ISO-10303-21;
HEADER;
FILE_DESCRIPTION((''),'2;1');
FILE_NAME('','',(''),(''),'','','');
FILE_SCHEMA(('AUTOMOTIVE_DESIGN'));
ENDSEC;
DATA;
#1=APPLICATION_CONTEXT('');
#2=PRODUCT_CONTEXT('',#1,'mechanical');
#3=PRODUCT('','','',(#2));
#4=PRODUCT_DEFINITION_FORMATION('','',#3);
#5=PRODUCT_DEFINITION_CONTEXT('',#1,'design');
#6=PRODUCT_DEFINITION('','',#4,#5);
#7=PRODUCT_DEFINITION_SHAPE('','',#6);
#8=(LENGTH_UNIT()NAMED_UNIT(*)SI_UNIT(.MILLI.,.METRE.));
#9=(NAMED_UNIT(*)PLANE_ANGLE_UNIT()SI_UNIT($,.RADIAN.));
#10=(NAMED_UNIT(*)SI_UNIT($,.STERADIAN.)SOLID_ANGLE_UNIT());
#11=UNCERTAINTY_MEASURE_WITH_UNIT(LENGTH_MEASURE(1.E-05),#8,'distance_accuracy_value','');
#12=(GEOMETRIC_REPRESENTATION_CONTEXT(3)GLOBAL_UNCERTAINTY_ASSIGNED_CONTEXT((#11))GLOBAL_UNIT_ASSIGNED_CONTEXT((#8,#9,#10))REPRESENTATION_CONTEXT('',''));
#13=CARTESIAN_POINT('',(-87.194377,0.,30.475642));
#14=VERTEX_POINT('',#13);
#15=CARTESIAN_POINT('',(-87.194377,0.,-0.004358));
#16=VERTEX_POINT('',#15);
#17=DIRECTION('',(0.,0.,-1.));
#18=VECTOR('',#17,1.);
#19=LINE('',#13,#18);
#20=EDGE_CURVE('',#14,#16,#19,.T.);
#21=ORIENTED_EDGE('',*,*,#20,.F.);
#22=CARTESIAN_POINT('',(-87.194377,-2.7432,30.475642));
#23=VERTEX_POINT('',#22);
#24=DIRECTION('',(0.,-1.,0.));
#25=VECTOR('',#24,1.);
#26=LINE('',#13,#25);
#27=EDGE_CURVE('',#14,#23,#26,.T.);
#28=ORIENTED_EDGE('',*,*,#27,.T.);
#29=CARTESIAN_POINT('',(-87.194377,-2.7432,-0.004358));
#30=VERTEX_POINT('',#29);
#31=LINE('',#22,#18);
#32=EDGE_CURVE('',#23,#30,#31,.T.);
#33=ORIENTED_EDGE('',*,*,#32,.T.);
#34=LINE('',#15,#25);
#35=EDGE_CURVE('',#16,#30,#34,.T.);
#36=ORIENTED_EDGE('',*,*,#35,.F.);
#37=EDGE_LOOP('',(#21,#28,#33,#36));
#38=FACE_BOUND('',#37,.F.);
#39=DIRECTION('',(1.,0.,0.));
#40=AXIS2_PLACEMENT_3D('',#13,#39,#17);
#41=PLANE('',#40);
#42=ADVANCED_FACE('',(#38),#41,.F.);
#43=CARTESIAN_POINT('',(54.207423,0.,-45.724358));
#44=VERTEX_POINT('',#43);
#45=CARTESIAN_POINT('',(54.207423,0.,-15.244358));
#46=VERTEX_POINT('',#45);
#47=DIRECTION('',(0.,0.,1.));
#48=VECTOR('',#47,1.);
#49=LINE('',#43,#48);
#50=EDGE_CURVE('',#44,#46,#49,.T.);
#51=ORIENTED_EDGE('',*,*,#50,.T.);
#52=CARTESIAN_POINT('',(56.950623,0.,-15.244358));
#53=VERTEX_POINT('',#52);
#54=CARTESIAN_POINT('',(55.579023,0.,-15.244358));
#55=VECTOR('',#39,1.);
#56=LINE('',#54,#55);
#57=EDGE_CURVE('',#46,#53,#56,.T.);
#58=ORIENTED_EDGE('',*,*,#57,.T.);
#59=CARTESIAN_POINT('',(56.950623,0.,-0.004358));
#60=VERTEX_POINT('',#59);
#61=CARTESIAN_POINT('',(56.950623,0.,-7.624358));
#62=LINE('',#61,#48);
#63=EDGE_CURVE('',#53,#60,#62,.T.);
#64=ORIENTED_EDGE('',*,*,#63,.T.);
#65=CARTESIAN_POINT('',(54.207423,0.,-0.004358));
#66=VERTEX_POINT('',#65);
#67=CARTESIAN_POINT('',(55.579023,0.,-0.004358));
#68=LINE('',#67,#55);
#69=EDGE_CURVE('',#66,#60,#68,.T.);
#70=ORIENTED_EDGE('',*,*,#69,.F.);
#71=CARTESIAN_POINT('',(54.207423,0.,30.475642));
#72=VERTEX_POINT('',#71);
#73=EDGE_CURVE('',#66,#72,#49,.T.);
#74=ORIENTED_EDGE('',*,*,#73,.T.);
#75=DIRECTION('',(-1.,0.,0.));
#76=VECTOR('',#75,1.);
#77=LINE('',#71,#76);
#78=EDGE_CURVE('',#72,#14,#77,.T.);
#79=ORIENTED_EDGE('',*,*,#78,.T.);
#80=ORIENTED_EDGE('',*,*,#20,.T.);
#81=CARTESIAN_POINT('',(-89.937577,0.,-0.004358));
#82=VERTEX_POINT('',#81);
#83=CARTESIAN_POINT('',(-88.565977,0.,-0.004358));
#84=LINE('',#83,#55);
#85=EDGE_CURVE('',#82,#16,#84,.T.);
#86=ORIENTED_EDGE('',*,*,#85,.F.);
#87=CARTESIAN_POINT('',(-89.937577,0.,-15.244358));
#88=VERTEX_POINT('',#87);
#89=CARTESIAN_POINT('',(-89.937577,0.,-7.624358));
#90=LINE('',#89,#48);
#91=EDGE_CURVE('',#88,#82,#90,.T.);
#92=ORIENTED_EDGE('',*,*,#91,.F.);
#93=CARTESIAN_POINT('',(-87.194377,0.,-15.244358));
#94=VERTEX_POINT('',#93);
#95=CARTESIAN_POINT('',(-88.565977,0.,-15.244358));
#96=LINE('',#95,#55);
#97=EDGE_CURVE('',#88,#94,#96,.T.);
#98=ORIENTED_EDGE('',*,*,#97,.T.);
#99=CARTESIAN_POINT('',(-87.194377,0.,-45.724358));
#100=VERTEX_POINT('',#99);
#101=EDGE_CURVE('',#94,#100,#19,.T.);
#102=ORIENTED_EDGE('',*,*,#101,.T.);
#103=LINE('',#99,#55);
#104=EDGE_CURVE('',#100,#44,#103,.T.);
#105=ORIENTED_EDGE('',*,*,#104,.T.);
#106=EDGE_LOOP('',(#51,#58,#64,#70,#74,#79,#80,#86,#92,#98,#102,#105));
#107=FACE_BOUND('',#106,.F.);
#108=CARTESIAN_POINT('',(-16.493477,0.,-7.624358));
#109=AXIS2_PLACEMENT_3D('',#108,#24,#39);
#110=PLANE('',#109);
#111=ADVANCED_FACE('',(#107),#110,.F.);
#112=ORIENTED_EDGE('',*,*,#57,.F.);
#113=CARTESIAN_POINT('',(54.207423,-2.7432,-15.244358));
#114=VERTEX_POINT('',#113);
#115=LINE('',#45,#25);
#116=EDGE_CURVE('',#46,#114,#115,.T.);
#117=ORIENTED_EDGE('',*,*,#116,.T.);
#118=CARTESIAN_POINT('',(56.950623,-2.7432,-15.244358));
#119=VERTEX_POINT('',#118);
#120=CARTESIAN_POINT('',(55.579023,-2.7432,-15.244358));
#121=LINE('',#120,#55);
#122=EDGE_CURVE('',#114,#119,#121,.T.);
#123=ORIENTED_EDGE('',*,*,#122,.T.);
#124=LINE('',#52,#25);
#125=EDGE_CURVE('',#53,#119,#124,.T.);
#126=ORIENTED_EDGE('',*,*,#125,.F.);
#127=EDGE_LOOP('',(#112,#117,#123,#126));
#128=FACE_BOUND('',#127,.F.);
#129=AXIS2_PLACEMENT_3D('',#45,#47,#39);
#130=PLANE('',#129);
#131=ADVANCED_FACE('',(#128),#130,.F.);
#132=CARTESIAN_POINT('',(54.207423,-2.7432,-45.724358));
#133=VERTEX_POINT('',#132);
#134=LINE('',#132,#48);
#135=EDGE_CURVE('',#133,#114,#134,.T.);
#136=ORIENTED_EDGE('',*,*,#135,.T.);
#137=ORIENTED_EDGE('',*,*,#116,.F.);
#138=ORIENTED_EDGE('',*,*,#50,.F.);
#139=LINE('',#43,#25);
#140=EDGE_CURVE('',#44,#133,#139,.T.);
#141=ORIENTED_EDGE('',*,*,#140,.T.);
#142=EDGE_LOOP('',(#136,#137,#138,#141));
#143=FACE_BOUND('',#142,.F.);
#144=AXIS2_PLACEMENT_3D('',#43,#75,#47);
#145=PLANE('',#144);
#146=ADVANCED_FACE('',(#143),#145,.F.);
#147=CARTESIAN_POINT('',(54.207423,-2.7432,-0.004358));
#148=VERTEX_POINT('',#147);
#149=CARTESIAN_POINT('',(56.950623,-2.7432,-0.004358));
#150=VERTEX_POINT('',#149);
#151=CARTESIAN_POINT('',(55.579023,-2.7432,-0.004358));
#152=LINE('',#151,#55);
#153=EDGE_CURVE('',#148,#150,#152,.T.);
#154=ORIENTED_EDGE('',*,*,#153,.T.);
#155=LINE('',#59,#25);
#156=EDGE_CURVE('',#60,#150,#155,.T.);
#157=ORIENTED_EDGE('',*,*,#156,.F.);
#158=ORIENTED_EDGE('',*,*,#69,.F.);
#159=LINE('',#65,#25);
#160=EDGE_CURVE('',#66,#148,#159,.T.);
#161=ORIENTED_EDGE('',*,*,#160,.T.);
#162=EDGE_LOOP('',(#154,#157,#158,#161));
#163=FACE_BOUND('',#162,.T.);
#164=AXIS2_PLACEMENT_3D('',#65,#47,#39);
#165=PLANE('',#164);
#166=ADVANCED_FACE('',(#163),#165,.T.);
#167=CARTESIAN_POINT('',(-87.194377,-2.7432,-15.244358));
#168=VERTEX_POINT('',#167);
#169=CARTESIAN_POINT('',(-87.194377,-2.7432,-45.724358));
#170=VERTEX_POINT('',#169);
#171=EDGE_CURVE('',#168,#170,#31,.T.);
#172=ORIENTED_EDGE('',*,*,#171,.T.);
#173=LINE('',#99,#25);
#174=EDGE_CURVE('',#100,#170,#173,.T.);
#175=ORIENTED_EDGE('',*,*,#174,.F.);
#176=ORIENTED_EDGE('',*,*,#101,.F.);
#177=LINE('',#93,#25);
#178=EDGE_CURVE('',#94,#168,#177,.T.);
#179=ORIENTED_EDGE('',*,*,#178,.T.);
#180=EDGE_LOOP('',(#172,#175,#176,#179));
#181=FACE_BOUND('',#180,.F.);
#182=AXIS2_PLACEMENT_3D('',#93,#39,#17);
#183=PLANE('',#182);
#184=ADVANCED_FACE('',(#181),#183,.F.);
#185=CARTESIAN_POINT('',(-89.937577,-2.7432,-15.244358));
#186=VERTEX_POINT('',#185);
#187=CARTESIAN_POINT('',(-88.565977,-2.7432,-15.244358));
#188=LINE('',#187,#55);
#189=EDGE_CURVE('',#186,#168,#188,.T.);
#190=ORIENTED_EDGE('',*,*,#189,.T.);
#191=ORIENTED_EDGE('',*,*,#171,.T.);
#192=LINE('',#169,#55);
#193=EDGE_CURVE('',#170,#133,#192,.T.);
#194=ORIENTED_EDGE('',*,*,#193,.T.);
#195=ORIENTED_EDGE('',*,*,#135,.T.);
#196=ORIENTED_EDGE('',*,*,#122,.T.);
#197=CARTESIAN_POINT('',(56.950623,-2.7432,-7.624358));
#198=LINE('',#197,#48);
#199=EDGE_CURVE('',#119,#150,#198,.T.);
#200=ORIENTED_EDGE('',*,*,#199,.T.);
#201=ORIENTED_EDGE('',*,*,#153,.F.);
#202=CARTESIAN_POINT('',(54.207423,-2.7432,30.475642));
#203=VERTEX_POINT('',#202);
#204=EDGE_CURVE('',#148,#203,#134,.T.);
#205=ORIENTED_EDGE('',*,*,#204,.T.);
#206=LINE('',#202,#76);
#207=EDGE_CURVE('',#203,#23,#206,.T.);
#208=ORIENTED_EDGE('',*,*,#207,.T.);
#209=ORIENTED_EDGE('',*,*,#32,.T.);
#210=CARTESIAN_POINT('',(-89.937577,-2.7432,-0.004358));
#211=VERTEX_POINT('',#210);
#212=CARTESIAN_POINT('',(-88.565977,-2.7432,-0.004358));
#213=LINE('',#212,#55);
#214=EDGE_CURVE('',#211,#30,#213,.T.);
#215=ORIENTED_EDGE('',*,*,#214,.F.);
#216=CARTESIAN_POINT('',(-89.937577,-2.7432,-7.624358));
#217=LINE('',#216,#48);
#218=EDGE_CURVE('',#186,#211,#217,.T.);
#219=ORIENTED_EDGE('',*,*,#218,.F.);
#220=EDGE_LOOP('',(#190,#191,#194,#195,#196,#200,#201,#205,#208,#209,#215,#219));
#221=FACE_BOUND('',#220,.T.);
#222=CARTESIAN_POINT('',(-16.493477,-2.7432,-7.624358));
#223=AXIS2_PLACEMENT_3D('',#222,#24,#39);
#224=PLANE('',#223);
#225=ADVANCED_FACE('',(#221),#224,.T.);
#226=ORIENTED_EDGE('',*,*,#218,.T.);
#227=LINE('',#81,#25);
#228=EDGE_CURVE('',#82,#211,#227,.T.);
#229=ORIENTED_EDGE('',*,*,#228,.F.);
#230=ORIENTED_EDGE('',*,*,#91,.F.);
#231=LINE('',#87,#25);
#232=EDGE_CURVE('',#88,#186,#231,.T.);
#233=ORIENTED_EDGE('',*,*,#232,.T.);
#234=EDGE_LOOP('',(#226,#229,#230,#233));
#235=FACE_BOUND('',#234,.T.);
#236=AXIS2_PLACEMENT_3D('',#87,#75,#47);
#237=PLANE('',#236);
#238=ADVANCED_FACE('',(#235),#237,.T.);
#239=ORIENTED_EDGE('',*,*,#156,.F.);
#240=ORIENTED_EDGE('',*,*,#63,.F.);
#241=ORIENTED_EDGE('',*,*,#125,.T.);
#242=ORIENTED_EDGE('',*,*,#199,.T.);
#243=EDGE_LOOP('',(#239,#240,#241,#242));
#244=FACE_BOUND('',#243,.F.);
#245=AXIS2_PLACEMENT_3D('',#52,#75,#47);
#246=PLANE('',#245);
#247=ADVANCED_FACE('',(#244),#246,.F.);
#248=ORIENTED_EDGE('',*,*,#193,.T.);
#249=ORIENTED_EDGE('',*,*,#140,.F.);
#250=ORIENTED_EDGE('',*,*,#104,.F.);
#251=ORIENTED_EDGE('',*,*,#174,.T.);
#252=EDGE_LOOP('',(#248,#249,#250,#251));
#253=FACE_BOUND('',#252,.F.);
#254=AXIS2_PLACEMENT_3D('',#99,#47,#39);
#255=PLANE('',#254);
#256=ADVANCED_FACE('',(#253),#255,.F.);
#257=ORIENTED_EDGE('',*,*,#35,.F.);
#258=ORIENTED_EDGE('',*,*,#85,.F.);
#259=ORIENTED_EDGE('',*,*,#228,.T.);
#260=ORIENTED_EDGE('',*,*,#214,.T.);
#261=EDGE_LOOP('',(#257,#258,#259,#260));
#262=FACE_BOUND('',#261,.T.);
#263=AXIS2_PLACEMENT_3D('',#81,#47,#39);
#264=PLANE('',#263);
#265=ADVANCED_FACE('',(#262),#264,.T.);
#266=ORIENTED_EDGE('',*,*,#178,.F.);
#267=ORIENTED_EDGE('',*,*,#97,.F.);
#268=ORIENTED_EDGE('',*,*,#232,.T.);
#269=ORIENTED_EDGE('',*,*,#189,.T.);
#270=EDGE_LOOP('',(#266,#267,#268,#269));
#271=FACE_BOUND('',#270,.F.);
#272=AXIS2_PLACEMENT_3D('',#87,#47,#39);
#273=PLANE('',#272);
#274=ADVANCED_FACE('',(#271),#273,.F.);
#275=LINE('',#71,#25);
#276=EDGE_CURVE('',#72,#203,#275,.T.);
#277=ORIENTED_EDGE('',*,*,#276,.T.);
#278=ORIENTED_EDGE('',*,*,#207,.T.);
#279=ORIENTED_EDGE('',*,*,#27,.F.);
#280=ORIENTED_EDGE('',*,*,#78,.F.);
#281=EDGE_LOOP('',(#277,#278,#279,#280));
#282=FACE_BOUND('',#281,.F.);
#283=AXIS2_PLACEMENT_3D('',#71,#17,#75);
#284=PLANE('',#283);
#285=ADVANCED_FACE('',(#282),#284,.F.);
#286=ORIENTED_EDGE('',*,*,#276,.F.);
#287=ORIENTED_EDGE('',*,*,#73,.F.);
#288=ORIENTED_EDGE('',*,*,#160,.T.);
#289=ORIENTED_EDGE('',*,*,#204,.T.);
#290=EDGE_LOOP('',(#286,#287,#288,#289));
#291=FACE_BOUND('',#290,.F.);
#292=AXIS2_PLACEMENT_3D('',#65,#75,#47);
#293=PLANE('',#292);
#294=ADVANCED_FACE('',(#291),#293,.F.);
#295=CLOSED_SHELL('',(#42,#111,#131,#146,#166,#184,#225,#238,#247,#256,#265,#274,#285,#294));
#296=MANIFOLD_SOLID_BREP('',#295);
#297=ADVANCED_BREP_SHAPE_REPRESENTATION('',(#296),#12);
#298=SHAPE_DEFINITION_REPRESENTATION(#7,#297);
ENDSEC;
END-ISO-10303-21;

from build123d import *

# Parameters (mm, degrees)
F0_W     = 2.7432
F0_H     = 15.24
F0_W_2   = 15.24
F0_H_2   = 2.7432
F1_DEPTH = 2.7432


# Not quite as in the source:
# - a feature names something its author has since deleted; it is built from what else it names


with BuildPart() as f1:
    # F0 (on Front) → F1 (new body)
    with BuildSketch(Plane.XZ):
        Polygon((-24.1134765283, 30.4756419325), (-87.1943765283, 30.4756419325), (-87.1943765283, -0.0043580675), (-87.1943765283, -15.2443580675), (-87.1943765283, -45.7243580675), (-24.1134765283, -45.7243580675), (-24.1134765283, -42.9811580675), (-8.8734765283, -42.9811580675), (-8.8734765283, -45.7243580675), (54.2074234717, -45.7243580675), (54.2074234717, -15.2443580675), (54.2074234717, -0.0043580675), (54.2074234717, 30.4756419325), (-8.8734765283, 30.4756419325), (-8.8734765283, 27.7324419325), (-24.1134765283, 27.7324419325), align=None)
        with Locations((-88.5659765283, -7.6243580675)):
            Rectangle(F0_W, F0_H)
        with Locations((55.5790234717, -7.6243580675)):
            Rectangle(F0_W, F0_H)
        with Locations((-16.4934765283, 29.1040419325)):
            Rectangle(F0_W_2, F0_H_2)
        with Locations((-16.4934765283, -44.3527580675)):
            Rectangle(F0_W_2, F0_H_2)
    extrude(amount=F1_DEPTH)


solid = f1.part
